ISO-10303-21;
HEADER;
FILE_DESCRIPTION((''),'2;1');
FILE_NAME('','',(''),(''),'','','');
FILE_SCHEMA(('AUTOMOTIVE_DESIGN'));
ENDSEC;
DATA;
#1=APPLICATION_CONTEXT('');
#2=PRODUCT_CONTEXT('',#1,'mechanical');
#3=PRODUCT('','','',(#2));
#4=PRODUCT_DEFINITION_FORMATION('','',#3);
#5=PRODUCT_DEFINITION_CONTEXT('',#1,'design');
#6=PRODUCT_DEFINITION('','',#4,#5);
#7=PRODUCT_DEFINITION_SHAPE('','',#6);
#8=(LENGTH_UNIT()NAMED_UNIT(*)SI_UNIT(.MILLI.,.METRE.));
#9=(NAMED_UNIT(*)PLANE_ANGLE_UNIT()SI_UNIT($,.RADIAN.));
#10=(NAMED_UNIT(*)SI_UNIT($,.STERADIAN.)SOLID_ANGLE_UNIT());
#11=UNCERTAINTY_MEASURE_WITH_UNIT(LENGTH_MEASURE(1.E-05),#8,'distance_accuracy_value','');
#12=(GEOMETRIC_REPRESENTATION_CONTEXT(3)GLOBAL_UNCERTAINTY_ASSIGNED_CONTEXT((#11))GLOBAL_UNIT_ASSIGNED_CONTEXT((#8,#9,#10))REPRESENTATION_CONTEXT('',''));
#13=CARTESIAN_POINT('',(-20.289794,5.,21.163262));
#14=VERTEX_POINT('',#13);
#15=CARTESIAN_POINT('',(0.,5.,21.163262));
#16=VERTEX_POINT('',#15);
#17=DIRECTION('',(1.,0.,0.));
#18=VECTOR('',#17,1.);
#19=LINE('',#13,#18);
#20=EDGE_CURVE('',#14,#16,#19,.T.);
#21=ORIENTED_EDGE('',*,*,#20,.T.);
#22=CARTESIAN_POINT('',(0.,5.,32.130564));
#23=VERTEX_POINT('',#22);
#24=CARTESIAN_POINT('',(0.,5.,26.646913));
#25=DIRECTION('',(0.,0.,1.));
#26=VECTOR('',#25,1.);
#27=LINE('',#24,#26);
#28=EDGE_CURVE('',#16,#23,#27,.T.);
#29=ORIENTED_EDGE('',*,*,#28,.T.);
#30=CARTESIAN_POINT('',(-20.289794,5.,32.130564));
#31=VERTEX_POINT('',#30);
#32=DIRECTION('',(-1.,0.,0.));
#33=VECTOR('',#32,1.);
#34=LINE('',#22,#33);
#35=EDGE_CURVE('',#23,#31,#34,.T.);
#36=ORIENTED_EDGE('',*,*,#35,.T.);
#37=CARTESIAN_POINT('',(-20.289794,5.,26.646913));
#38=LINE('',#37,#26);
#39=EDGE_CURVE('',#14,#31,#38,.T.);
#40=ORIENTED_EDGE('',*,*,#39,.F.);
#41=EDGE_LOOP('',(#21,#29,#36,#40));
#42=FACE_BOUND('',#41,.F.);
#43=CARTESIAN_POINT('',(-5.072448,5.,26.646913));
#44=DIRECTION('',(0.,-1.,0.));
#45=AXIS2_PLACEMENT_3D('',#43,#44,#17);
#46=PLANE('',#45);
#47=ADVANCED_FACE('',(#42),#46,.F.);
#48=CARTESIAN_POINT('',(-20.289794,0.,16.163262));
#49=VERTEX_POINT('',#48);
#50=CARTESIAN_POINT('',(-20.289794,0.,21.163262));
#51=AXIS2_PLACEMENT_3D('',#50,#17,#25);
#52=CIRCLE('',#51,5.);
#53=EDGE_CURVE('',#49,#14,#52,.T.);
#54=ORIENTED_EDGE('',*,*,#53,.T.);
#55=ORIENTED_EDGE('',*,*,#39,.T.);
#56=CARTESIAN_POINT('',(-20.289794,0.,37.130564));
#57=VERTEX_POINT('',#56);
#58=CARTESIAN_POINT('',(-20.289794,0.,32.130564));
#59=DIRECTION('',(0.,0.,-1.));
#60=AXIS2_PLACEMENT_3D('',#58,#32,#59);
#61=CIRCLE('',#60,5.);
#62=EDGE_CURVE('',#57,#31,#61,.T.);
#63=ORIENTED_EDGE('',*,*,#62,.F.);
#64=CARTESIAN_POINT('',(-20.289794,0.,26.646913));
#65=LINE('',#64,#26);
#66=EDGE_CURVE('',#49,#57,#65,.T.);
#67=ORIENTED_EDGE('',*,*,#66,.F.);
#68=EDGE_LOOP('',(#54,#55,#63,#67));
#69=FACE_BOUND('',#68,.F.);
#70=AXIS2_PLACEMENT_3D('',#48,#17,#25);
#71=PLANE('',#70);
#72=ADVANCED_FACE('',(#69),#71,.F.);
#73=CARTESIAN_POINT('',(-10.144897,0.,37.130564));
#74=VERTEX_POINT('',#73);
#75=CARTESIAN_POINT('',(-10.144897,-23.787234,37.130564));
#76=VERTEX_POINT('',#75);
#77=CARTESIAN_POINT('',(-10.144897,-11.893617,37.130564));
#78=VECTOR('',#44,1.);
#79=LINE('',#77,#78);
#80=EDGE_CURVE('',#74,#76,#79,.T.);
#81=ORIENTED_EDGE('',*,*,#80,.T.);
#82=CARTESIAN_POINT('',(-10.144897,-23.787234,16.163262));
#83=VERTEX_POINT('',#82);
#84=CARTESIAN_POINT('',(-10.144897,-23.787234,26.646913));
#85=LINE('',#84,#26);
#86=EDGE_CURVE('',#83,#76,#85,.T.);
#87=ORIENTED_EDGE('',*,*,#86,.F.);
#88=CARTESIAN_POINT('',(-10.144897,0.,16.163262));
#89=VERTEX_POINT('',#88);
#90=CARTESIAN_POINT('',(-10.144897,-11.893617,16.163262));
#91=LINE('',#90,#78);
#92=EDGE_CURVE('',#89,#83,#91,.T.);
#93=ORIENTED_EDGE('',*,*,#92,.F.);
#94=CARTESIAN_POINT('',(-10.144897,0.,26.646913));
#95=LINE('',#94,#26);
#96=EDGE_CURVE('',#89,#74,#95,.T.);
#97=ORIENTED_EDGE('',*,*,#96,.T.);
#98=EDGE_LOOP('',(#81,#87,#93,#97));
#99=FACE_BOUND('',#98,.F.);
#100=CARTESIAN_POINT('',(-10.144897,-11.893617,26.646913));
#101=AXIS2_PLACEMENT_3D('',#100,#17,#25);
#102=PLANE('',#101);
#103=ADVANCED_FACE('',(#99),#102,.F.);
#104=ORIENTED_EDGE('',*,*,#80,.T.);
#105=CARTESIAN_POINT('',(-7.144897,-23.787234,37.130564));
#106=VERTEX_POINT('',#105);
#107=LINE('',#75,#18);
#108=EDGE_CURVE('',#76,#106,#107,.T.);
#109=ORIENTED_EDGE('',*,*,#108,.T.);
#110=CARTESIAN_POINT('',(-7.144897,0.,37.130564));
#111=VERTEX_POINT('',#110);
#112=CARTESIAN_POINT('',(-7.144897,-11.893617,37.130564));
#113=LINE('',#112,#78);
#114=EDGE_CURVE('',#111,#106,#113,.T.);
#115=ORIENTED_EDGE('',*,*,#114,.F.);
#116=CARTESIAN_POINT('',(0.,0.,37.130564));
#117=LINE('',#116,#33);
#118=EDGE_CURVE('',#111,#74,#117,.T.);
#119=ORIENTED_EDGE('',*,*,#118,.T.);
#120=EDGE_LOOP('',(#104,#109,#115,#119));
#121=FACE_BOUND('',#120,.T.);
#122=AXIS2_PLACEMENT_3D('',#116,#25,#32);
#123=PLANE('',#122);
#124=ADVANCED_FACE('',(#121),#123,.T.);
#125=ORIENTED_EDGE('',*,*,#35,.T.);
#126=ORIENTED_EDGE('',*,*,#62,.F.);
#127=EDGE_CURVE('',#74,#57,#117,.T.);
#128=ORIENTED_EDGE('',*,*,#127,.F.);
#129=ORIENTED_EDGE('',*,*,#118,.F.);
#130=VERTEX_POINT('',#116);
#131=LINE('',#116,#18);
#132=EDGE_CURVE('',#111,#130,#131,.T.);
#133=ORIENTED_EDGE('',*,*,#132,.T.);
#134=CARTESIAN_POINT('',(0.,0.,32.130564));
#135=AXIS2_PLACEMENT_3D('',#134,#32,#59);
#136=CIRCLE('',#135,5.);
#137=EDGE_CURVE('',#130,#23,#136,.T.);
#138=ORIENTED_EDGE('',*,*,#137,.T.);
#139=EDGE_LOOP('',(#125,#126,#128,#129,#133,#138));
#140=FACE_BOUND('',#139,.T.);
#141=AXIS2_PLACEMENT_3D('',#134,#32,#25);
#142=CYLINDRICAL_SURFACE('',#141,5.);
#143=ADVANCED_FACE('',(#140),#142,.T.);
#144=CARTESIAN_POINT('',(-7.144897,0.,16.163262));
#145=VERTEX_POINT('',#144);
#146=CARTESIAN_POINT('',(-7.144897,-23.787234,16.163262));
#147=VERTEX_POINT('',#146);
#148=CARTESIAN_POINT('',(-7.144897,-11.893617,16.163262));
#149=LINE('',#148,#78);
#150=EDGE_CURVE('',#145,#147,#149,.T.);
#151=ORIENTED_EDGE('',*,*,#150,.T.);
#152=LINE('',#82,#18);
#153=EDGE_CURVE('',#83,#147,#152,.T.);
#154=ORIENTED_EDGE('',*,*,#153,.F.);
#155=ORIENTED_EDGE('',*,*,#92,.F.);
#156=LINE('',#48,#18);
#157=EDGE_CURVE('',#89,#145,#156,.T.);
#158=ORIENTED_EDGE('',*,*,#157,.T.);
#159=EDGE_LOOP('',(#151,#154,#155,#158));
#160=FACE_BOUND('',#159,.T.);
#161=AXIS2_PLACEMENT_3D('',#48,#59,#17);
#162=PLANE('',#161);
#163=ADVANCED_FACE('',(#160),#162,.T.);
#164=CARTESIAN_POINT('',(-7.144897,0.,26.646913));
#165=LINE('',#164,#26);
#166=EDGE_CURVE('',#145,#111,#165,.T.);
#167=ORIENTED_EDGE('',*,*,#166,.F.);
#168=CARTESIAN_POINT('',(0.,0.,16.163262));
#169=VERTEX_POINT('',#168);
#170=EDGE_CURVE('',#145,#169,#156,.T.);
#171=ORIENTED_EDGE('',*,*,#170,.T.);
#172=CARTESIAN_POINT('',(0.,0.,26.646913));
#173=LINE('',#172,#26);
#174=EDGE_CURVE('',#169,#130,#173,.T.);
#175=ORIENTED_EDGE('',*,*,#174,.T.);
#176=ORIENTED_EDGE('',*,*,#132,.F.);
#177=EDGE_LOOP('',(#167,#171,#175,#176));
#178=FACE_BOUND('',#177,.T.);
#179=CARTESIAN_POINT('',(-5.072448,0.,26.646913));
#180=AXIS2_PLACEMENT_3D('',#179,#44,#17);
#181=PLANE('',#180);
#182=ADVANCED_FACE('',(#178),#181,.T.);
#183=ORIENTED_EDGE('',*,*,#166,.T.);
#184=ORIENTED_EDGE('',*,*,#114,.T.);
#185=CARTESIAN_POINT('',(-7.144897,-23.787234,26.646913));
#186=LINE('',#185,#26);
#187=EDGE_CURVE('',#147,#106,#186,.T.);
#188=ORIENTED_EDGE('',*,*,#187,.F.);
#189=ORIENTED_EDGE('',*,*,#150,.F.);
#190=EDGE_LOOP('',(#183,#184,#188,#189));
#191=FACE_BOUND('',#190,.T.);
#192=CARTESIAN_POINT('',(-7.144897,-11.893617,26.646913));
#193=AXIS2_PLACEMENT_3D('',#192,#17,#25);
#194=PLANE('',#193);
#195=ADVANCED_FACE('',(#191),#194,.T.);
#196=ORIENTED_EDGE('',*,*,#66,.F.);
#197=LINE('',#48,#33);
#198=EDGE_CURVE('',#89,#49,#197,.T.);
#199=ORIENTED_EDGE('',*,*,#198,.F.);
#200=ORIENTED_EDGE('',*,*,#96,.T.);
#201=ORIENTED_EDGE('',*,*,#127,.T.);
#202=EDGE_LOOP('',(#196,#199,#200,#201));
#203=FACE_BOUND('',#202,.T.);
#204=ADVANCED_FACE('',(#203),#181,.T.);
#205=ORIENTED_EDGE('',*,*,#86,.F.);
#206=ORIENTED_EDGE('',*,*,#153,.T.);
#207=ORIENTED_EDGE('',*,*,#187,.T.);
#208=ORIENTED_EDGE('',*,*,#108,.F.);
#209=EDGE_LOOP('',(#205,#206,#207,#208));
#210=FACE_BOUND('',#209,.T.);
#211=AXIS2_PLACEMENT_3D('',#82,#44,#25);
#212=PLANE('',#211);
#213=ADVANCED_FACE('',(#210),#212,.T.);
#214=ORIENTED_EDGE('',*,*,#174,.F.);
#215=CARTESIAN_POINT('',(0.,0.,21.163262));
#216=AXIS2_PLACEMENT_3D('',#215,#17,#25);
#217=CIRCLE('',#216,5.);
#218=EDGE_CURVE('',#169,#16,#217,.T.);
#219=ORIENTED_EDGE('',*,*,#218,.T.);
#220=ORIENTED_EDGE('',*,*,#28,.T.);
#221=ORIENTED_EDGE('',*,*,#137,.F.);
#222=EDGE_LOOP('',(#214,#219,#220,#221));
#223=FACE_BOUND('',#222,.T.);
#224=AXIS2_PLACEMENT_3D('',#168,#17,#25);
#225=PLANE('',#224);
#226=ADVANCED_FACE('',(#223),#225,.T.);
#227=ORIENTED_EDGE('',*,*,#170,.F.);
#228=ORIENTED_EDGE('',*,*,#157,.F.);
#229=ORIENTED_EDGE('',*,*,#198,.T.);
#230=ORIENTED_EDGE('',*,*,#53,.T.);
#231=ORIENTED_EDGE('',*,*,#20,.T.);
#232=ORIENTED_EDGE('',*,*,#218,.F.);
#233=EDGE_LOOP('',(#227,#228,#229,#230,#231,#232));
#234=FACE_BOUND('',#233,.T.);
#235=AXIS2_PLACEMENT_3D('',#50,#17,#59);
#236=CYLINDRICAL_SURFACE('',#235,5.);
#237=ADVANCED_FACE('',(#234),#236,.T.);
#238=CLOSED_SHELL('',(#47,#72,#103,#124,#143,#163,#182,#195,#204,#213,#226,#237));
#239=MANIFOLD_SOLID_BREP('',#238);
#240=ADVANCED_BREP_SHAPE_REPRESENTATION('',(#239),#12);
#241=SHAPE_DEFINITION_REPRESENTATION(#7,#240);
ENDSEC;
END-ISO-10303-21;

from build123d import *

# Parameters (mm, degrees)
F1_E1_RIGHT_W = 20.9673028439
F1_E1_RIGHT_H = 23.7872338621
F2_DEPTH      = 3
F0_W          = 10.1448968053
F0_H          = 20.9673028439
F3_DEPTH      = 5
F4_R          = 5
F5_R          = 5


with BuildPart() as f2:
    # F1_E1_right (on explicit) → F2 (new body)
    with BuildSketch(Plane(origin=(-10.1448968053, 0, 16.1632616073), x_dir=(0, 0, 1), z_dir=(1, 0, 0))):
        with Locations((10.483651422, 11.893616931)):
            Rectangle(F1_E1_RIGHT_W, F1_E1_RIGHT_H)
    extrude(amount=F2_DEPTH)

    # F0 (on Front) → F3 (join)
    with BuildSketch(Plane.XZ):
        with Locations((-5.0724484026, 26.6469130293)):
            Rectangle(F0_W, F0_H)
        with Locations((-15.2173452079, 26.6469130293)):
            Rectangle(F0_W, F0_H)
    extrude(amount=-F3_DEPTH)

    # F4
    f4_edges = [f2.edges().sort_by_distance(p)[0] for p in [
        (-10.144897, 5, 37.130564),
    ]]
    fillet(f4_edges, radius=F4_R)

    # F5
    f5_edges = [f2.edges().sort_by_distance(p)[0] for p in [
        (-10.144897, 5, 16.163262),
    ]]
    fillet(f5_edges, radius=F5_R)


solid = f2.part
